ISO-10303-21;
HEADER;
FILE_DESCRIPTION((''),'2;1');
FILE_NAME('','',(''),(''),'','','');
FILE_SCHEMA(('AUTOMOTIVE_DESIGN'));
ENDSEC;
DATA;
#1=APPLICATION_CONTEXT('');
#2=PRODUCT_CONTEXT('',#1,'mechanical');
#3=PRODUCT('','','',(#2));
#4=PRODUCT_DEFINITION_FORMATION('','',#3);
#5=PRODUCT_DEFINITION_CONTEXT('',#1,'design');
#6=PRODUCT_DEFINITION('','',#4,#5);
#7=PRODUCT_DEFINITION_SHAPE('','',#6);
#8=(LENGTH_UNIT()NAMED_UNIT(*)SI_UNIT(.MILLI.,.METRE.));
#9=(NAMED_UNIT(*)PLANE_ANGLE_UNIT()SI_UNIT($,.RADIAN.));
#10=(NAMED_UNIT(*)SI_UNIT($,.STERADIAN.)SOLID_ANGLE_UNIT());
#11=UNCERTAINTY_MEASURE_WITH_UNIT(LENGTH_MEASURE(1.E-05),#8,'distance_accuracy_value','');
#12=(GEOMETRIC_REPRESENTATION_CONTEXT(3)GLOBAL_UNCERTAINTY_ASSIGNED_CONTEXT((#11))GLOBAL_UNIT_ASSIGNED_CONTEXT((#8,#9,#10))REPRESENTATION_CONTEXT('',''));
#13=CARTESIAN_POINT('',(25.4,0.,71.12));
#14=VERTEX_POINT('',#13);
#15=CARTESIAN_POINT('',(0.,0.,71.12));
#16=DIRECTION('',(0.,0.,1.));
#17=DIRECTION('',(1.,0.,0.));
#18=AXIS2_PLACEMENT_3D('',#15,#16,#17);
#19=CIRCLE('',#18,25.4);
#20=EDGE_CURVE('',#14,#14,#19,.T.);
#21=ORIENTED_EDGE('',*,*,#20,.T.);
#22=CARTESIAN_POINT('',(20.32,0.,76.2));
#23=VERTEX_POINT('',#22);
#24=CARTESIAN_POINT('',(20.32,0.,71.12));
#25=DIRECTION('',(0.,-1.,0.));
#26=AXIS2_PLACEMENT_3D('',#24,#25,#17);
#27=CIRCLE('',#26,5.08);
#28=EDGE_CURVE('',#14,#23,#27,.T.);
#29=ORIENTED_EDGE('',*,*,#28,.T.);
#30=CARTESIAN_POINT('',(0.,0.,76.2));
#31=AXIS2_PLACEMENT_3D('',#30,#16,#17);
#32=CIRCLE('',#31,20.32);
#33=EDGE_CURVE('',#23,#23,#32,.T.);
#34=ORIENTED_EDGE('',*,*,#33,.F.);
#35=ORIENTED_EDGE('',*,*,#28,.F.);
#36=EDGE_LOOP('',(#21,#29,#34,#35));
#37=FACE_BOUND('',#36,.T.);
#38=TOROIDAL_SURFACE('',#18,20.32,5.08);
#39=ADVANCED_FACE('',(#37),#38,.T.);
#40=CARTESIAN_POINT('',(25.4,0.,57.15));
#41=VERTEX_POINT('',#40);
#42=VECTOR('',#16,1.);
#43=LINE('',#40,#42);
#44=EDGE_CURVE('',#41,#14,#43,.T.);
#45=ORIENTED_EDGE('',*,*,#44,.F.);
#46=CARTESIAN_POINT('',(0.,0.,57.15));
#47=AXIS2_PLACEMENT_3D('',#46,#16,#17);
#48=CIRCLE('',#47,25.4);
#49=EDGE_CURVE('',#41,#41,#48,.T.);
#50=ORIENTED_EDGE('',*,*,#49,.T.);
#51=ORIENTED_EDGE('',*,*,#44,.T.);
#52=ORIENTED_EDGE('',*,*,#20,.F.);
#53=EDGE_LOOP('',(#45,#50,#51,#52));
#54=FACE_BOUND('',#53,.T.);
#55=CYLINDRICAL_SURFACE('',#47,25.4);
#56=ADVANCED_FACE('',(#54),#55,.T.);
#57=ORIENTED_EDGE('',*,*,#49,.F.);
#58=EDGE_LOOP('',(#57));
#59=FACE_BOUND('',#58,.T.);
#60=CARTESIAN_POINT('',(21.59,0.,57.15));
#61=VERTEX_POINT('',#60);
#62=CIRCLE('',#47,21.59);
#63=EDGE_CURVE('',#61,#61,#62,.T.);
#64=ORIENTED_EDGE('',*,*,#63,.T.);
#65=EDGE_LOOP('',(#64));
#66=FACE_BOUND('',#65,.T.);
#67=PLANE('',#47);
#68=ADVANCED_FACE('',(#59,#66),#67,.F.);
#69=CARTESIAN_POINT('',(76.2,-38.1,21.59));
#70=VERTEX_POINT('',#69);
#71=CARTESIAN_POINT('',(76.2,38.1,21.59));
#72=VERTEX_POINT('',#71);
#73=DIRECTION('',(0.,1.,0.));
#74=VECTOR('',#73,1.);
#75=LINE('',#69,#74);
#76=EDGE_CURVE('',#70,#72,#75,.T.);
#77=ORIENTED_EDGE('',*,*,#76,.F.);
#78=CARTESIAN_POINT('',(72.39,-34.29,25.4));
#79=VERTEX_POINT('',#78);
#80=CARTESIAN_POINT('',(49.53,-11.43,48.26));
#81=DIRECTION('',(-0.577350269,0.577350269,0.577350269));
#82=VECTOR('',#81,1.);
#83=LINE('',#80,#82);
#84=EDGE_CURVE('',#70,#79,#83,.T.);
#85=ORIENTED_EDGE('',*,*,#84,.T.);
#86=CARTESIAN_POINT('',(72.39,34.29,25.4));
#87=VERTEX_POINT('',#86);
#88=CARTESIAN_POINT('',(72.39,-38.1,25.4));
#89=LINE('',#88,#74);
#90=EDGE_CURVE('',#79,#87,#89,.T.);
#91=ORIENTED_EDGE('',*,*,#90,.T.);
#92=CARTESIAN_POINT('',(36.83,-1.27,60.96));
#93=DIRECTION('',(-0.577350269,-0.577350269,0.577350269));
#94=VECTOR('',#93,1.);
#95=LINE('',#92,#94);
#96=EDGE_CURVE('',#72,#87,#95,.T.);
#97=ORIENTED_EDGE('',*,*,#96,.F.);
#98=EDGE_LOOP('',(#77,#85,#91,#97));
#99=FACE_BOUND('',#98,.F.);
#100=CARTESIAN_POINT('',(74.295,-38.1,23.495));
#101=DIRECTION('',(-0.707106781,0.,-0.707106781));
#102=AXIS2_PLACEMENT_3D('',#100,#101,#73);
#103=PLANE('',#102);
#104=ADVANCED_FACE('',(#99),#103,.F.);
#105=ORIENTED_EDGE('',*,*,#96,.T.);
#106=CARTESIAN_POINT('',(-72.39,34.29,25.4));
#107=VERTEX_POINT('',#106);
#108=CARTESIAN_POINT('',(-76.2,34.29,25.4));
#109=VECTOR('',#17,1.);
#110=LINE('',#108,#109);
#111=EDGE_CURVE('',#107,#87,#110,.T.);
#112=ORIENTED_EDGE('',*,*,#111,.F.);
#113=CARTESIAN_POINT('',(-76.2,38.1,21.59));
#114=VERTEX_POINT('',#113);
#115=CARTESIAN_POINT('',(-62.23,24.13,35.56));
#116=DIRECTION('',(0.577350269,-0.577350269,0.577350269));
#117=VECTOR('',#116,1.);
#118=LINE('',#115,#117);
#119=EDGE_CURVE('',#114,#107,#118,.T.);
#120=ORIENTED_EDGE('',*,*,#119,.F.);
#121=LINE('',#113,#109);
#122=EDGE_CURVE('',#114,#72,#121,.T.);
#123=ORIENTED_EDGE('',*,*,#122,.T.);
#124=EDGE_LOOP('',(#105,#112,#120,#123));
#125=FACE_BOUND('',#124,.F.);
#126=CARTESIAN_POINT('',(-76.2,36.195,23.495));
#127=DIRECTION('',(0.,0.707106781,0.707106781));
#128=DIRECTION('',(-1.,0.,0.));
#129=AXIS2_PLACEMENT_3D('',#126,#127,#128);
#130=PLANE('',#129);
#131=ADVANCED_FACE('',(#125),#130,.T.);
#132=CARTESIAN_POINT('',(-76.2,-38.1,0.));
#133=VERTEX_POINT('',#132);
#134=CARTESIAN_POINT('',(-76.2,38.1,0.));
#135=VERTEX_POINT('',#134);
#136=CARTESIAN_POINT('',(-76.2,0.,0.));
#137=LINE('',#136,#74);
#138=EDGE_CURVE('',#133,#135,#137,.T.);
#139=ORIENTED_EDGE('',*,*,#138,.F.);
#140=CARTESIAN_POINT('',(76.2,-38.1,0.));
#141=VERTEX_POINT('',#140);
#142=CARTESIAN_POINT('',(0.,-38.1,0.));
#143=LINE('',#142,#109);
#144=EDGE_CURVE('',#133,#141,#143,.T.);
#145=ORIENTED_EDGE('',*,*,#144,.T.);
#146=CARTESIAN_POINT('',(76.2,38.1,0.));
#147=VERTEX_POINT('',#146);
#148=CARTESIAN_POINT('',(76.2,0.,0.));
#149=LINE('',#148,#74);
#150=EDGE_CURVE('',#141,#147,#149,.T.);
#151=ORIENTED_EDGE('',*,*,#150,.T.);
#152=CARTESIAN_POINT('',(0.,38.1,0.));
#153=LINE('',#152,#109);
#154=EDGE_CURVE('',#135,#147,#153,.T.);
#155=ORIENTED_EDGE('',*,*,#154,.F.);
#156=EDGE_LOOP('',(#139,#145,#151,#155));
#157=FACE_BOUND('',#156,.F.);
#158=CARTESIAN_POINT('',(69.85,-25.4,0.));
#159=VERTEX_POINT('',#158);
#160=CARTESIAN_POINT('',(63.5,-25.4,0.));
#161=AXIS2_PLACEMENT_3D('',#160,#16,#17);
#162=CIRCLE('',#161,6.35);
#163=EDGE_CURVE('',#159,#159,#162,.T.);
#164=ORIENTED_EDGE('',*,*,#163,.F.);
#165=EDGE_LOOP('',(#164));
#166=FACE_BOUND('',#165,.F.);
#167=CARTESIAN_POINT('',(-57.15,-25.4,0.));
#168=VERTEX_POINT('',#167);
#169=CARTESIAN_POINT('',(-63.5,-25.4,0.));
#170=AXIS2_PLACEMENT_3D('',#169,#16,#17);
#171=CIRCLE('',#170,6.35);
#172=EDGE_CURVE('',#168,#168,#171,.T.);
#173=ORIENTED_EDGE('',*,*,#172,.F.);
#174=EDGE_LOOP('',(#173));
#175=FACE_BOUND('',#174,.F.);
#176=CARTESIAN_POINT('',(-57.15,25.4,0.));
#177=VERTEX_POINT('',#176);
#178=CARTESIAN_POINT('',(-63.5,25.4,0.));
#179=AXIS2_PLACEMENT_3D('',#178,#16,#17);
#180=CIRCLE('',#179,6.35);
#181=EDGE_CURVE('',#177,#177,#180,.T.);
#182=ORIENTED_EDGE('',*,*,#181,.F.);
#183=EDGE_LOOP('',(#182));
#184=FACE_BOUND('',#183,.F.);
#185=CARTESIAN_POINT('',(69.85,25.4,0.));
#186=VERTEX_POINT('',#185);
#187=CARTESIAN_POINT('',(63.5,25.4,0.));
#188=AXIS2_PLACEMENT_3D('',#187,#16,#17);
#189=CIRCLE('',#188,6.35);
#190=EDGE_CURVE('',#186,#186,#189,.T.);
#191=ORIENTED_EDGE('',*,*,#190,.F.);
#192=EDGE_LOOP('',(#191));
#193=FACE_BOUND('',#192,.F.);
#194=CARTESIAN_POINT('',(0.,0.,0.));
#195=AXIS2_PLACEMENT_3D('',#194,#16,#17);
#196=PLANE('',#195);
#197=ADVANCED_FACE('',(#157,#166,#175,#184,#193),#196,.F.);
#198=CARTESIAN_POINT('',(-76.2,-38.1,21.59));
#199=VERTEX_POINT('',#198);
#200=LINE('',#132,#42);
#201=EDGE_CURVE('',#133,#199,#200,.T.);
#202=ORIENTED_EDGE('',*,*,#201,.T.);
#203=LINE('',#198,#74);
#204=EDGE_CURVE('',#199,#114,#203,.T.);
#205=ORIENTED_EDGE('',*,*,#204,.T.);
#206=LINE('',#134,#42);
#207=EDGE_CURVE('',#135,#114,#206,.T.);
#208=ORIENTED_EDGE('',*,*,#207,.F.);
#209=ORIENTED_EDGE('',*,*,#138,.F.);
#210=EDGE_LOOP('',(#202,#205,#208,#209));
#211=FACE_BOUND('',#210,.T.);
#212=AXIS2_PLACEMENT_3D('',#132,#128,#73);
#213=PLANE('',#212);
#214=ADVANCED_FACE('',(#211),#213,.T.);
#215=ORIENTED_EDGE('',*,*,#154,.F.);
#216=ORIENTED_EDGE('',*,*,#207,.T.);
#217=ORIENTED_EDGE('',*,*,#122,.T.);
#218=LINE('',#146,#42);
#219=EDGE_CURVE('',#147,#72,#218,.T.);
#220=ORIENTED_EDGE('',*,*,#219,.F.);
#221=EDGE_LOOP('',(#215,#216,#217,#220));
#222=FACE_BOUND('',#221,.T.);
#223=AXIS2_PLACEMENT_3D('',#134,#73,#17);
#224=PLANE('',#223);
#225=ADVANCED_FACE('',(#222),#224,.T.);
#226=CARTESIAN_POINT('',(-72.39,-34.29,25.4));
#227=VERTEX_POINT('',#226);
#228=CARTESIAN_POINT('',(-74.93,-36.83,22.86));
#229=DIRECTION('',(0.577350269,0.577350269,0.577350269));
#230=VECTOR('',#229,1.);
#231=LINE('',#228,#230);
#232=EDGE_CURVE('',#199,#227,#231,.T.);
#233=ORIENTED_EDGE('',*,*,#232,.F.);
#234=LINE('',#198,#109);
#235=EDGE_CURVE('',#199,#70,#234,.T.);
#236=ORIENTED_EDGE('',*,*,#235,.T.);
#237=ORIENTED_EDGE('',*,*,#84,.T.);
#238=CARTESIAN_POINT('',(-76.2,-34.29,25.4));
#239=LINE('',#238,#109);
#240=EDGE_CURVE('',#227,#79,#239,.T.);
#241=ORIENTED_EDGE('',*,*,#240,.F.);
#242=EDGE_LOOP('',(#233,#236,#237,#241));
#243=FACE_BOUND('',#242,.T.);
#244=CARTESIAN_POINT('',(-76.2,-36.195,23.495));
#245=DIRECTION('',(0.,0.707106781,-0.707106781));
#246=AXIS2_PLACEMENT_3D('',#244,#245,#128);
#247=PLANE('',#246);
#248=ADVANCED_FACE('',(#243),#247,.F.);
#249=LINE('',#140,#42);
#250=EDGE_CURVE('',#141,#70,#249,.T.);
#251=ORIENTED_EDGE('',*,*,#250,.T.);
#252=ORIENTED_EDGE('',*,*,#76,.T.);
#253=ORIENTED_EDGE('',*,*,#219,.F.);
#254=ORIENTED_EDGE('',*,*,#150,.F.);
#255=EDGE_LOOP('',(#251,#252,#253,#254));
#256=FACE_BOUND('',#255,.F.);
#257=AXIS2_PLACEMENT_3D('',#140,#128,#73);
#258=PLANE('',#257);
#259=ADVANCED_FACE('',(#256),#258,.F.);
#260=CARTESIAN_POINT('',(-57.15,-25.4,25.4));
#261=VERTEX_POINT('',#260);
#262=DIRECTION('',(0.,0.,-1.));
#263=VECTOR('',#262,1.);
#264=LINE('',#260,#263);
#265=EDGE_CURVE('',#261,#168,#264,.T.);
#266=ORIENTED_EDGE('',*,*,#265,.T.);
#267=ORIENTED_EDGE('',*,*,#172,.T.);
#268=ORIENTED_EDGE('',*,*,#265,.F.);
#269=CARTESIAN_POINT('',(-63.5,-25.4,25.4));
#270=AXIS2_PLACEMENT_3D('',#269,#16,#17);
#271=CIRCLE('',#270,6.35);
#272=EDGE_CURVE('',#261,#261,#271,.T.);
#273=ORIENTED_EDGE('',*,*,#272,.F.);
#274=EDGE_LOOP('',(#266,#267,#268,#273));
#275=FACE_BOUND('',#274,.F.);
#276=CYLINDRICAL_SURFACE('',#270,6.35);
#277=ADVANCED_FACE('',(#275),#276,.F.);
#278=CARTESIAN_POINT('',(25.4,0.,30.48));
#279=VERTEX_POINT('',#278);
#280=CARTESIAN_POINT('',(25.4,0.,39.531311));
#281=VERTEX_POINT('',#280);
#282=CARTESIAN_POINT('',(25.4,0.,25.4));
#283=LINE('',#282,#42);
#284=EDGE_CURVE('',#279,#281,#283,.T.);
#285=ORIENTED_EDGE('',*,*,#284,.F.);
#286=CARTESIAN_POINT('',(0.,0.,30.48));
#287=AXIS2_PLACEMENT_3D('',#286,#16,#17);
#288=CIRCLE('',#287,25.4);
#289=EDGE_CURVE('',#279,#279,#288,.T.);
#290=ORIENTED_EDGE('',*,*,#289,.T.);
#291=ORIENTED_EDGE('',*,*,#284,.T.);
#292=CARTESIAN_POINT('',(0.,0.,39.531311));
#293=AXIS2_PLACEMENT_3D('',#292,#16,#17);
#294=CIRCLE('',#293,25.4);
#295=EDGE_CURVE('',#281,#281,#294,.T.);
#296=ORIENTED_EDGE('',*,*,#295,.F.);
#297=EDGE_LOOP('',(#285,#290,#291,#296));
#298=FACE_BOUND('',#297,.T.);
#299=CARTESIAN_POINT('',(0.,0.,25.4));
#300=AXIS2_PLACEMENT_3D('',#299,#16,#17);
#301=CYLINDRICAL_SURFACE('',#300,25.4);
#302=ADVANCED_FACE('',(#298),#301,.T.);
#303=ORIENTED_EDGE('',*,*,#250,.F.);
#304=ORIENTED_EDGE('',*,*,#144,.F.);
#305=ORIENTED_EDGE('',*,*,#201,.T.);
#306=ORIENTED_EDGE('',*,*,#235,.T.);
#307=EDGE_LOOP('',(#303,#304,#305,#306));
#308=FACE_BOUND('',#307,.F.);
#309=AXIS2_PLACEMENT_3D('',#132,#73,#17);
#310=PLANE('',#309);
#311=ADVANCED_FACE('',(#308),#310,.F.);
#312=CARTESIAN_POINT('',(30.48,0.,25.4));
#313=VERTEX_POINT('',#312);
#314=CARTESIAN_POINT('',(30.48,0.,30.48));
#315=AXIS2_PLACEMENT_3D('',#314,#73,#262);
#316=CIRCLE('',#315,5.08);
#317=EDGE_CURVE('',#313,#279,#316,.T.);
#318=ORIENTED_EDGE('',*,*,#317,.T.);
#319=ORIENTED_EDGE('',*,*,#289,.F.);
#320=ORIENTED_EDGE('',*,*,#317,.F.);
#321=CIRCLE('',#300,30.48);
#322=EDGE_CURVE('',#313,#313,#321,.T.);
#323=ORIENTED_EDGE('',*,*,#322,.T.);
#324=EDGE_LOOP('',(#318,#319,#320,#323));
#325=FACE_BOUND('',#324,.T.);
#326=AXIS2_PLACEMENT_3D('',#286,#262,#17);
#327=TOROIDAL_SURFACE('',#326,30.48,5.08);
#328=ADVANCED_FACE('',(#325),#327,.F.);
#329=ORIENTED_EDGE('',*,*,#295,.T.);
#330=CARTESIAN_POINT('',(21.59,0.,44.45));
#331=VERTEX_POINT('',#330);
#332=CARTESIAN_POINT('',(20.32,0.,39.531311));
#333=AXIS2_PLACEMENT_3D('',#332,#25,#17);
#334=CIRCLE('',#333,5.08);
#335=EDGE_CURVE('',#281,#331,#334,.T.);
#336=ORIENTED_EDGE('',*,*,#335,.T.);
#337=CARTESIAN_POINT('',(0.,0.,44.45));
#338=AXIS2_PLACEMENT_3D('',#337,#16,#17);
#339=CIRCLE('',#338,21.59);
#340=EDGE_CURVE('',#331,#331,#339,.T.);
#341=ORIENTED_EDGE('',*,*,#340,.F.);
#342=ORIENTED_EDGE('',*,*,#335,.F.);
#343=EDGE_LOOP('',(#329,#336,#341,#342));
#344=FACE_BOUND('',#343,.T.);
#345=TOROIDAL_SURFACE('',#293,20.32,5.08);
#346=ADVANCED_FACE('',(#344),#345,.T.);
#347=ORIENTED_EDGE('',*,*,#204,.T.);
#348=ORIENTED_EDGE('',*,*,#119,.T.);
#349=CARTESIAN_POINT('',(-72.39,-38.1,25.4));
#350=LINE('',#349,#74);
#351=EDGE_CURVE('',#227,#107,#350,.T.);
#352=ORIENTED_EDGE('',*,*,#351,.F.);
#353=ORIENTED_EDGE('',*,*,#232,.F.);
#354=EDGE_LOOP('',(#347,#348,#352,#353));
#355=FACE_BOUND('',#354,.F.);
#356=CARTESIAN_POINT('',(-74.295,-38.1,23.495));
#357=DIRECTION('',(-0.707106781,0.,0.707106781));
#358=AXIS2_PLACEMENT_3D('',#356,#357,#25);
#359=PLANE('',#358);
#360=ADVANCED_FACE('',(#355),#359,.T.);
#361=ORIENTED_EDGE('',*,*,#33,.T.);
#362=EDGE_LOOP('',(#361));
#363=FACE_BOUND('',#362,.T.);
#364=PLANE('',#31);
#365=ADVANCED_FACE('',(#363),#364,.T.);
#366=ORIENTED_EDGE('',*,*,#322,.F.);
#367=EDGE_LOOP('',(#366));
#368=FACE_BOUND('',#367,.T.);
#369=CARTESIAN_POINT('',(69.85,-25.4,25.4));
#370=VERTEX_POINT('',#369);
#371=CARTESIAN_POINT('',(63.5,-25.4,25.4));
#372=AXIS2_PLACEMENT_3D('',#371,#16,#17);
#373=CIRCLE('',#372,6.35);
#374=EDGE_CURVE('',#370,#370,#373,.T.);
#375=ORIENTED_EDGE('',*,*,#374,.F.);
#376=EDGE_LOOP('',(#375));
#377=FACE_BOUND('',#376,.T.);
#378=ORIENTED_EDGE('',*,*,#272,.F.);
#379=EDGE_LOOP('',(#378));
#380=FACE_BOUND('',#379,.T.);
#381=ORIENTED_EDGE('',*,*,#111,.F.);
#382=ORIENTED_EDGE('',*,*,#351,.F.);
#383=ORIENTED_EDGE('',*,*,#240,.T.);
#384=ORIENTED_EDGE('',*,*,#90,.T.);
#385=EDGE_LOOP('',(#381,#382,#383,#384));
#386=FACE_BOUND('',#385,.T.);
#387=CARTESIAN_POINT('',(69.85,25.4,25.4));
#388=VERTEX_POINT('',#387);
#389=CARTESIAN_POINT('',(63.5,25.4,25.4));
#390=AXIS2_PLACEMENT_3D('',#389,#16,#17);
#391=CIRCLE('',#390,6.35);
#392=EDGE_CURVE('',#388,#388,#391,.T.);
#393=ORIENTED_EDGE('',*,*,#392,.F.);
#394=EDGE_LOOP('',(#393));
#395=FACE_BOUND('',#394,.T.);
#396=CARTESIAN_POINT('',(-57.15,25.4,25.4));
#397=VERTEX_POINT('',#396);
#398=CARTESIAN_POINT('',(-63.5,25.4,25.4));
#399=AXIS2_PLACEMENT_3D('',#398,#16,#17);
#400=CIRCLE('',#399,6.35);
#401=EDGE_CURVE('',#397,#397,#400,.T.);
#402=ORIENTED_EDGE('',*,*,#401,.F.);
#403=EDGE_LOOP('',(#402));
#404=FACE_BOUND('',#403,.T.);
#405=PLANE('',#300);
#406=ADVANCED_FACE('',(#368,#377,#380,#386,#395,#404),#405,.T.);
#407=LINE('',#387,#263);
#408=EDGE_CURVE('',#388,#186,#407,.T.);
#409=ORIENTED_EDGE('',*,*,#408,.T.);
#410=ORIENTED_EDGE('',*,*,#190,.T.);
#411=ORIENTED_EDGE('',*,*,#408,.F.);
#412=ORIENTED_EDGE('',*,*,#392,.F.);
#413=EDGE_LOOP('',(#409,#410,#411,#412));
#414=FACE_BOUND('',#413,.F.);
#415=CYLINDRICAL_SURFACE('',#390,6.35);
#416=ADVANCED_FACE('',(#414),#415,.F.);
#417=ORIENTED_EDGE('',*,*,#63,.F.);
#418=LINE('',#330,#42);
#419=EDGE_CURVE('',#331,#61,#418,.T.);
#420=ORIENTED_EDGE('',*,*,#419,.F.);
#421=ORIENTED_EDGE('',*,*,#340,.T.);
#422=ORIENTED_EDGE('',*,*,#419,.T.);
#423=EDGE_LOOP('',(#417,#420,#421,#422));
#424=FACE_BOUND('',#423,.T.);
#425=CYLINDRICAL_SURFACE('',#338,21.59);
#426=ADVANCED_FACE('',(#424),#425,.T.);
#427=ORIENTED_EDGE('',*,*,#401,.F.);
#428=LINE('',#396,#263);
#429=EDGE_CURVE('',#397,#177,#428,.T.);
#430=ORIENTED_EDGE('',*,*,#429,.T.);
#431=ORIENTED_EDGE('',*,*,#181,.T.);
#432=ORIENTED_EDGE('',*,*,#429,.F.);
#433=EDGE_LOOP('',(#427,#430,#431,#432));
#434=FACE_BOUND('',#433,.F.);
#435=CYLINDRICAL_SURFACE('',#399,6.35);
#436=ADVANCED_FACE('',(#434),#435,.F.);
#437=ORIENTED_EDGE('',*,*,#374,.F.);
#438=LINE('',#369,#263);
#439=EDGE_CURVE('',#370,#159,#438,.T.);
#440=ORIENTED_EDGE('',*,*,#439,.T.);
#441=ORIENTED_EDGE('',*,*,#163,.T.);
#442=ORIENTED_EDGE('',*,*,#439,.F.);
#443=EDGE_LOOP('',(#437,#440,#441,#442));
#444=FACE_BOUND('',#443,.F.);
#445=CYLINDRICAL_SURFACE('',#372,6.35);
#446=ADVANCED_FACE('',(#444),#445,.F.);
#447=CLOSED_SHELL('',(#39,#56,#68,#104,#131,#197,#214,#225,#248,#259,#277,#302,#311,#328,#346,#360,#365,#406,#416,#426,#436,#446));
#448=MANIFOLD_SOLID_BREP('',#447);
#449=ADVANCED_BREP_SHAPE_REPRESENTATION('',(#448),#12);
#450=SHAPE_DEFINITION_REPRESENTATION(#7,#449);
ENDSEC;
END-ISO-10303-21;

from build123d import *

# Parameters (mm, degrees)
F0_W     = 152.4
F0_H     = 76.2
F1_DEPTH = 25.4
F2_R     = 6.35
F3_DEPTH = 25.401
F4_SIZE  = 3.81


# Not quite as in the source:
# - a fillet or chamfer that OpenCascade refuses, or shapes differently, is made with other operations: its cross-section is extruded or revolved along the edge and cut away or added


with BuildPart() as f1:
    # F0 (on Top) → F1 (new body)
    with BuildSketch(Plane.XY):
        Rectangle(F0_W, F0_H)
    extrude(amount=F1_DEPTH)

    # F2 (on face) → F3 (cut, through all)
    with BuildSketch(Plane.XY.offset(25.4)):
        with Locations((-63.5, 25.4)):
            Circle(F2_R)
        with Locations((63.5, 25.4)):
            Circle(F2_R)
        with Locations((63.5, -25.4)):
            Circle(F2_R)
        with Locations((-63.5, -25.4)):
            Circle(F2_R)
    extrude(amount=-F3_DEPTH, mode=Mode.SUBTRACT)

    # F4
    f4_edges = [f1.edges().sort_by_distance(p)[0] for p in [
        (0, -38.1, 25.4),
        (-76.2, 0, 25.4),
        (0, 38.1, 25.4),
        (76.2, 0, 25.4),
    ]]
    chamfer(f4_edges, length=F4_SIZE)

    # F5 (on Front) → F6 (revolve)
    with BuildSketch(Plane.XZ):
        Polygon((0, 76.2), (0, 25.4), (25.4, 25.4), (25.4, 44.45), (21.59, 44.45), (21.59, 57.15), (25.4, 57.15), (25.4, 76.2), align=None)
    revolve(axis=Axis((0, 0, 50.8), (0, 0, 1)))

    # F7: fillet of radius 5.08 on 3 edges, made by hand

    # F7_s1 → F7_t2 (revolve)
    with BuildSketch(Plane.XZ):
        with BuildLine():
            ThreePointArc((30.48, 25.4), (26.8878975516, 26.8878975516), (25.4, 30.48))
            Line((25.4, 30.48), (25.4, 25.4))
            Line((25.4, 25.4), (30.48, 25.4))
        make_face()
    revolve(axis=Axis((0, 0, 25.4), (0, 0, 1)))

    # F7_s3 → F7_t4 (revolve, cut)
    with BuildSketch(Plane.XZ):
        with BuildLine():
            ThreePointArc((25.4, 39.5313111503), (24.3360926284, 42.6421631237), (21.59, 44.45))
            Line((21.59, 44.45), (25.4, 44.45))
            Line((25.4, 44.45), (25.4, 39.5313111503))
        make_face()
    revolve(axis=Axis((0, 0, 44.45), (0, 0, 1)), mode=Mode.SUBTRACT)

    # F7_s5 → F7_t6 (revolve, cut)
    with BuildSketch(Plane.XZ):
        with BuildLine():
            ThreePointArc((25.4, 71.12), (23.9121024484, 74.7121024484), (20.32, 76.2))
            Line((20.32, 76.2), (25.4, 76.2))
            Line((25.4, 76.2), (25.4, 71.12))
        make_face()
    revolve(axis=Axis((0, 0, 76.2), (0, 0, 1)), mode=Mode.SUBTRACT)


solid = f1.part
